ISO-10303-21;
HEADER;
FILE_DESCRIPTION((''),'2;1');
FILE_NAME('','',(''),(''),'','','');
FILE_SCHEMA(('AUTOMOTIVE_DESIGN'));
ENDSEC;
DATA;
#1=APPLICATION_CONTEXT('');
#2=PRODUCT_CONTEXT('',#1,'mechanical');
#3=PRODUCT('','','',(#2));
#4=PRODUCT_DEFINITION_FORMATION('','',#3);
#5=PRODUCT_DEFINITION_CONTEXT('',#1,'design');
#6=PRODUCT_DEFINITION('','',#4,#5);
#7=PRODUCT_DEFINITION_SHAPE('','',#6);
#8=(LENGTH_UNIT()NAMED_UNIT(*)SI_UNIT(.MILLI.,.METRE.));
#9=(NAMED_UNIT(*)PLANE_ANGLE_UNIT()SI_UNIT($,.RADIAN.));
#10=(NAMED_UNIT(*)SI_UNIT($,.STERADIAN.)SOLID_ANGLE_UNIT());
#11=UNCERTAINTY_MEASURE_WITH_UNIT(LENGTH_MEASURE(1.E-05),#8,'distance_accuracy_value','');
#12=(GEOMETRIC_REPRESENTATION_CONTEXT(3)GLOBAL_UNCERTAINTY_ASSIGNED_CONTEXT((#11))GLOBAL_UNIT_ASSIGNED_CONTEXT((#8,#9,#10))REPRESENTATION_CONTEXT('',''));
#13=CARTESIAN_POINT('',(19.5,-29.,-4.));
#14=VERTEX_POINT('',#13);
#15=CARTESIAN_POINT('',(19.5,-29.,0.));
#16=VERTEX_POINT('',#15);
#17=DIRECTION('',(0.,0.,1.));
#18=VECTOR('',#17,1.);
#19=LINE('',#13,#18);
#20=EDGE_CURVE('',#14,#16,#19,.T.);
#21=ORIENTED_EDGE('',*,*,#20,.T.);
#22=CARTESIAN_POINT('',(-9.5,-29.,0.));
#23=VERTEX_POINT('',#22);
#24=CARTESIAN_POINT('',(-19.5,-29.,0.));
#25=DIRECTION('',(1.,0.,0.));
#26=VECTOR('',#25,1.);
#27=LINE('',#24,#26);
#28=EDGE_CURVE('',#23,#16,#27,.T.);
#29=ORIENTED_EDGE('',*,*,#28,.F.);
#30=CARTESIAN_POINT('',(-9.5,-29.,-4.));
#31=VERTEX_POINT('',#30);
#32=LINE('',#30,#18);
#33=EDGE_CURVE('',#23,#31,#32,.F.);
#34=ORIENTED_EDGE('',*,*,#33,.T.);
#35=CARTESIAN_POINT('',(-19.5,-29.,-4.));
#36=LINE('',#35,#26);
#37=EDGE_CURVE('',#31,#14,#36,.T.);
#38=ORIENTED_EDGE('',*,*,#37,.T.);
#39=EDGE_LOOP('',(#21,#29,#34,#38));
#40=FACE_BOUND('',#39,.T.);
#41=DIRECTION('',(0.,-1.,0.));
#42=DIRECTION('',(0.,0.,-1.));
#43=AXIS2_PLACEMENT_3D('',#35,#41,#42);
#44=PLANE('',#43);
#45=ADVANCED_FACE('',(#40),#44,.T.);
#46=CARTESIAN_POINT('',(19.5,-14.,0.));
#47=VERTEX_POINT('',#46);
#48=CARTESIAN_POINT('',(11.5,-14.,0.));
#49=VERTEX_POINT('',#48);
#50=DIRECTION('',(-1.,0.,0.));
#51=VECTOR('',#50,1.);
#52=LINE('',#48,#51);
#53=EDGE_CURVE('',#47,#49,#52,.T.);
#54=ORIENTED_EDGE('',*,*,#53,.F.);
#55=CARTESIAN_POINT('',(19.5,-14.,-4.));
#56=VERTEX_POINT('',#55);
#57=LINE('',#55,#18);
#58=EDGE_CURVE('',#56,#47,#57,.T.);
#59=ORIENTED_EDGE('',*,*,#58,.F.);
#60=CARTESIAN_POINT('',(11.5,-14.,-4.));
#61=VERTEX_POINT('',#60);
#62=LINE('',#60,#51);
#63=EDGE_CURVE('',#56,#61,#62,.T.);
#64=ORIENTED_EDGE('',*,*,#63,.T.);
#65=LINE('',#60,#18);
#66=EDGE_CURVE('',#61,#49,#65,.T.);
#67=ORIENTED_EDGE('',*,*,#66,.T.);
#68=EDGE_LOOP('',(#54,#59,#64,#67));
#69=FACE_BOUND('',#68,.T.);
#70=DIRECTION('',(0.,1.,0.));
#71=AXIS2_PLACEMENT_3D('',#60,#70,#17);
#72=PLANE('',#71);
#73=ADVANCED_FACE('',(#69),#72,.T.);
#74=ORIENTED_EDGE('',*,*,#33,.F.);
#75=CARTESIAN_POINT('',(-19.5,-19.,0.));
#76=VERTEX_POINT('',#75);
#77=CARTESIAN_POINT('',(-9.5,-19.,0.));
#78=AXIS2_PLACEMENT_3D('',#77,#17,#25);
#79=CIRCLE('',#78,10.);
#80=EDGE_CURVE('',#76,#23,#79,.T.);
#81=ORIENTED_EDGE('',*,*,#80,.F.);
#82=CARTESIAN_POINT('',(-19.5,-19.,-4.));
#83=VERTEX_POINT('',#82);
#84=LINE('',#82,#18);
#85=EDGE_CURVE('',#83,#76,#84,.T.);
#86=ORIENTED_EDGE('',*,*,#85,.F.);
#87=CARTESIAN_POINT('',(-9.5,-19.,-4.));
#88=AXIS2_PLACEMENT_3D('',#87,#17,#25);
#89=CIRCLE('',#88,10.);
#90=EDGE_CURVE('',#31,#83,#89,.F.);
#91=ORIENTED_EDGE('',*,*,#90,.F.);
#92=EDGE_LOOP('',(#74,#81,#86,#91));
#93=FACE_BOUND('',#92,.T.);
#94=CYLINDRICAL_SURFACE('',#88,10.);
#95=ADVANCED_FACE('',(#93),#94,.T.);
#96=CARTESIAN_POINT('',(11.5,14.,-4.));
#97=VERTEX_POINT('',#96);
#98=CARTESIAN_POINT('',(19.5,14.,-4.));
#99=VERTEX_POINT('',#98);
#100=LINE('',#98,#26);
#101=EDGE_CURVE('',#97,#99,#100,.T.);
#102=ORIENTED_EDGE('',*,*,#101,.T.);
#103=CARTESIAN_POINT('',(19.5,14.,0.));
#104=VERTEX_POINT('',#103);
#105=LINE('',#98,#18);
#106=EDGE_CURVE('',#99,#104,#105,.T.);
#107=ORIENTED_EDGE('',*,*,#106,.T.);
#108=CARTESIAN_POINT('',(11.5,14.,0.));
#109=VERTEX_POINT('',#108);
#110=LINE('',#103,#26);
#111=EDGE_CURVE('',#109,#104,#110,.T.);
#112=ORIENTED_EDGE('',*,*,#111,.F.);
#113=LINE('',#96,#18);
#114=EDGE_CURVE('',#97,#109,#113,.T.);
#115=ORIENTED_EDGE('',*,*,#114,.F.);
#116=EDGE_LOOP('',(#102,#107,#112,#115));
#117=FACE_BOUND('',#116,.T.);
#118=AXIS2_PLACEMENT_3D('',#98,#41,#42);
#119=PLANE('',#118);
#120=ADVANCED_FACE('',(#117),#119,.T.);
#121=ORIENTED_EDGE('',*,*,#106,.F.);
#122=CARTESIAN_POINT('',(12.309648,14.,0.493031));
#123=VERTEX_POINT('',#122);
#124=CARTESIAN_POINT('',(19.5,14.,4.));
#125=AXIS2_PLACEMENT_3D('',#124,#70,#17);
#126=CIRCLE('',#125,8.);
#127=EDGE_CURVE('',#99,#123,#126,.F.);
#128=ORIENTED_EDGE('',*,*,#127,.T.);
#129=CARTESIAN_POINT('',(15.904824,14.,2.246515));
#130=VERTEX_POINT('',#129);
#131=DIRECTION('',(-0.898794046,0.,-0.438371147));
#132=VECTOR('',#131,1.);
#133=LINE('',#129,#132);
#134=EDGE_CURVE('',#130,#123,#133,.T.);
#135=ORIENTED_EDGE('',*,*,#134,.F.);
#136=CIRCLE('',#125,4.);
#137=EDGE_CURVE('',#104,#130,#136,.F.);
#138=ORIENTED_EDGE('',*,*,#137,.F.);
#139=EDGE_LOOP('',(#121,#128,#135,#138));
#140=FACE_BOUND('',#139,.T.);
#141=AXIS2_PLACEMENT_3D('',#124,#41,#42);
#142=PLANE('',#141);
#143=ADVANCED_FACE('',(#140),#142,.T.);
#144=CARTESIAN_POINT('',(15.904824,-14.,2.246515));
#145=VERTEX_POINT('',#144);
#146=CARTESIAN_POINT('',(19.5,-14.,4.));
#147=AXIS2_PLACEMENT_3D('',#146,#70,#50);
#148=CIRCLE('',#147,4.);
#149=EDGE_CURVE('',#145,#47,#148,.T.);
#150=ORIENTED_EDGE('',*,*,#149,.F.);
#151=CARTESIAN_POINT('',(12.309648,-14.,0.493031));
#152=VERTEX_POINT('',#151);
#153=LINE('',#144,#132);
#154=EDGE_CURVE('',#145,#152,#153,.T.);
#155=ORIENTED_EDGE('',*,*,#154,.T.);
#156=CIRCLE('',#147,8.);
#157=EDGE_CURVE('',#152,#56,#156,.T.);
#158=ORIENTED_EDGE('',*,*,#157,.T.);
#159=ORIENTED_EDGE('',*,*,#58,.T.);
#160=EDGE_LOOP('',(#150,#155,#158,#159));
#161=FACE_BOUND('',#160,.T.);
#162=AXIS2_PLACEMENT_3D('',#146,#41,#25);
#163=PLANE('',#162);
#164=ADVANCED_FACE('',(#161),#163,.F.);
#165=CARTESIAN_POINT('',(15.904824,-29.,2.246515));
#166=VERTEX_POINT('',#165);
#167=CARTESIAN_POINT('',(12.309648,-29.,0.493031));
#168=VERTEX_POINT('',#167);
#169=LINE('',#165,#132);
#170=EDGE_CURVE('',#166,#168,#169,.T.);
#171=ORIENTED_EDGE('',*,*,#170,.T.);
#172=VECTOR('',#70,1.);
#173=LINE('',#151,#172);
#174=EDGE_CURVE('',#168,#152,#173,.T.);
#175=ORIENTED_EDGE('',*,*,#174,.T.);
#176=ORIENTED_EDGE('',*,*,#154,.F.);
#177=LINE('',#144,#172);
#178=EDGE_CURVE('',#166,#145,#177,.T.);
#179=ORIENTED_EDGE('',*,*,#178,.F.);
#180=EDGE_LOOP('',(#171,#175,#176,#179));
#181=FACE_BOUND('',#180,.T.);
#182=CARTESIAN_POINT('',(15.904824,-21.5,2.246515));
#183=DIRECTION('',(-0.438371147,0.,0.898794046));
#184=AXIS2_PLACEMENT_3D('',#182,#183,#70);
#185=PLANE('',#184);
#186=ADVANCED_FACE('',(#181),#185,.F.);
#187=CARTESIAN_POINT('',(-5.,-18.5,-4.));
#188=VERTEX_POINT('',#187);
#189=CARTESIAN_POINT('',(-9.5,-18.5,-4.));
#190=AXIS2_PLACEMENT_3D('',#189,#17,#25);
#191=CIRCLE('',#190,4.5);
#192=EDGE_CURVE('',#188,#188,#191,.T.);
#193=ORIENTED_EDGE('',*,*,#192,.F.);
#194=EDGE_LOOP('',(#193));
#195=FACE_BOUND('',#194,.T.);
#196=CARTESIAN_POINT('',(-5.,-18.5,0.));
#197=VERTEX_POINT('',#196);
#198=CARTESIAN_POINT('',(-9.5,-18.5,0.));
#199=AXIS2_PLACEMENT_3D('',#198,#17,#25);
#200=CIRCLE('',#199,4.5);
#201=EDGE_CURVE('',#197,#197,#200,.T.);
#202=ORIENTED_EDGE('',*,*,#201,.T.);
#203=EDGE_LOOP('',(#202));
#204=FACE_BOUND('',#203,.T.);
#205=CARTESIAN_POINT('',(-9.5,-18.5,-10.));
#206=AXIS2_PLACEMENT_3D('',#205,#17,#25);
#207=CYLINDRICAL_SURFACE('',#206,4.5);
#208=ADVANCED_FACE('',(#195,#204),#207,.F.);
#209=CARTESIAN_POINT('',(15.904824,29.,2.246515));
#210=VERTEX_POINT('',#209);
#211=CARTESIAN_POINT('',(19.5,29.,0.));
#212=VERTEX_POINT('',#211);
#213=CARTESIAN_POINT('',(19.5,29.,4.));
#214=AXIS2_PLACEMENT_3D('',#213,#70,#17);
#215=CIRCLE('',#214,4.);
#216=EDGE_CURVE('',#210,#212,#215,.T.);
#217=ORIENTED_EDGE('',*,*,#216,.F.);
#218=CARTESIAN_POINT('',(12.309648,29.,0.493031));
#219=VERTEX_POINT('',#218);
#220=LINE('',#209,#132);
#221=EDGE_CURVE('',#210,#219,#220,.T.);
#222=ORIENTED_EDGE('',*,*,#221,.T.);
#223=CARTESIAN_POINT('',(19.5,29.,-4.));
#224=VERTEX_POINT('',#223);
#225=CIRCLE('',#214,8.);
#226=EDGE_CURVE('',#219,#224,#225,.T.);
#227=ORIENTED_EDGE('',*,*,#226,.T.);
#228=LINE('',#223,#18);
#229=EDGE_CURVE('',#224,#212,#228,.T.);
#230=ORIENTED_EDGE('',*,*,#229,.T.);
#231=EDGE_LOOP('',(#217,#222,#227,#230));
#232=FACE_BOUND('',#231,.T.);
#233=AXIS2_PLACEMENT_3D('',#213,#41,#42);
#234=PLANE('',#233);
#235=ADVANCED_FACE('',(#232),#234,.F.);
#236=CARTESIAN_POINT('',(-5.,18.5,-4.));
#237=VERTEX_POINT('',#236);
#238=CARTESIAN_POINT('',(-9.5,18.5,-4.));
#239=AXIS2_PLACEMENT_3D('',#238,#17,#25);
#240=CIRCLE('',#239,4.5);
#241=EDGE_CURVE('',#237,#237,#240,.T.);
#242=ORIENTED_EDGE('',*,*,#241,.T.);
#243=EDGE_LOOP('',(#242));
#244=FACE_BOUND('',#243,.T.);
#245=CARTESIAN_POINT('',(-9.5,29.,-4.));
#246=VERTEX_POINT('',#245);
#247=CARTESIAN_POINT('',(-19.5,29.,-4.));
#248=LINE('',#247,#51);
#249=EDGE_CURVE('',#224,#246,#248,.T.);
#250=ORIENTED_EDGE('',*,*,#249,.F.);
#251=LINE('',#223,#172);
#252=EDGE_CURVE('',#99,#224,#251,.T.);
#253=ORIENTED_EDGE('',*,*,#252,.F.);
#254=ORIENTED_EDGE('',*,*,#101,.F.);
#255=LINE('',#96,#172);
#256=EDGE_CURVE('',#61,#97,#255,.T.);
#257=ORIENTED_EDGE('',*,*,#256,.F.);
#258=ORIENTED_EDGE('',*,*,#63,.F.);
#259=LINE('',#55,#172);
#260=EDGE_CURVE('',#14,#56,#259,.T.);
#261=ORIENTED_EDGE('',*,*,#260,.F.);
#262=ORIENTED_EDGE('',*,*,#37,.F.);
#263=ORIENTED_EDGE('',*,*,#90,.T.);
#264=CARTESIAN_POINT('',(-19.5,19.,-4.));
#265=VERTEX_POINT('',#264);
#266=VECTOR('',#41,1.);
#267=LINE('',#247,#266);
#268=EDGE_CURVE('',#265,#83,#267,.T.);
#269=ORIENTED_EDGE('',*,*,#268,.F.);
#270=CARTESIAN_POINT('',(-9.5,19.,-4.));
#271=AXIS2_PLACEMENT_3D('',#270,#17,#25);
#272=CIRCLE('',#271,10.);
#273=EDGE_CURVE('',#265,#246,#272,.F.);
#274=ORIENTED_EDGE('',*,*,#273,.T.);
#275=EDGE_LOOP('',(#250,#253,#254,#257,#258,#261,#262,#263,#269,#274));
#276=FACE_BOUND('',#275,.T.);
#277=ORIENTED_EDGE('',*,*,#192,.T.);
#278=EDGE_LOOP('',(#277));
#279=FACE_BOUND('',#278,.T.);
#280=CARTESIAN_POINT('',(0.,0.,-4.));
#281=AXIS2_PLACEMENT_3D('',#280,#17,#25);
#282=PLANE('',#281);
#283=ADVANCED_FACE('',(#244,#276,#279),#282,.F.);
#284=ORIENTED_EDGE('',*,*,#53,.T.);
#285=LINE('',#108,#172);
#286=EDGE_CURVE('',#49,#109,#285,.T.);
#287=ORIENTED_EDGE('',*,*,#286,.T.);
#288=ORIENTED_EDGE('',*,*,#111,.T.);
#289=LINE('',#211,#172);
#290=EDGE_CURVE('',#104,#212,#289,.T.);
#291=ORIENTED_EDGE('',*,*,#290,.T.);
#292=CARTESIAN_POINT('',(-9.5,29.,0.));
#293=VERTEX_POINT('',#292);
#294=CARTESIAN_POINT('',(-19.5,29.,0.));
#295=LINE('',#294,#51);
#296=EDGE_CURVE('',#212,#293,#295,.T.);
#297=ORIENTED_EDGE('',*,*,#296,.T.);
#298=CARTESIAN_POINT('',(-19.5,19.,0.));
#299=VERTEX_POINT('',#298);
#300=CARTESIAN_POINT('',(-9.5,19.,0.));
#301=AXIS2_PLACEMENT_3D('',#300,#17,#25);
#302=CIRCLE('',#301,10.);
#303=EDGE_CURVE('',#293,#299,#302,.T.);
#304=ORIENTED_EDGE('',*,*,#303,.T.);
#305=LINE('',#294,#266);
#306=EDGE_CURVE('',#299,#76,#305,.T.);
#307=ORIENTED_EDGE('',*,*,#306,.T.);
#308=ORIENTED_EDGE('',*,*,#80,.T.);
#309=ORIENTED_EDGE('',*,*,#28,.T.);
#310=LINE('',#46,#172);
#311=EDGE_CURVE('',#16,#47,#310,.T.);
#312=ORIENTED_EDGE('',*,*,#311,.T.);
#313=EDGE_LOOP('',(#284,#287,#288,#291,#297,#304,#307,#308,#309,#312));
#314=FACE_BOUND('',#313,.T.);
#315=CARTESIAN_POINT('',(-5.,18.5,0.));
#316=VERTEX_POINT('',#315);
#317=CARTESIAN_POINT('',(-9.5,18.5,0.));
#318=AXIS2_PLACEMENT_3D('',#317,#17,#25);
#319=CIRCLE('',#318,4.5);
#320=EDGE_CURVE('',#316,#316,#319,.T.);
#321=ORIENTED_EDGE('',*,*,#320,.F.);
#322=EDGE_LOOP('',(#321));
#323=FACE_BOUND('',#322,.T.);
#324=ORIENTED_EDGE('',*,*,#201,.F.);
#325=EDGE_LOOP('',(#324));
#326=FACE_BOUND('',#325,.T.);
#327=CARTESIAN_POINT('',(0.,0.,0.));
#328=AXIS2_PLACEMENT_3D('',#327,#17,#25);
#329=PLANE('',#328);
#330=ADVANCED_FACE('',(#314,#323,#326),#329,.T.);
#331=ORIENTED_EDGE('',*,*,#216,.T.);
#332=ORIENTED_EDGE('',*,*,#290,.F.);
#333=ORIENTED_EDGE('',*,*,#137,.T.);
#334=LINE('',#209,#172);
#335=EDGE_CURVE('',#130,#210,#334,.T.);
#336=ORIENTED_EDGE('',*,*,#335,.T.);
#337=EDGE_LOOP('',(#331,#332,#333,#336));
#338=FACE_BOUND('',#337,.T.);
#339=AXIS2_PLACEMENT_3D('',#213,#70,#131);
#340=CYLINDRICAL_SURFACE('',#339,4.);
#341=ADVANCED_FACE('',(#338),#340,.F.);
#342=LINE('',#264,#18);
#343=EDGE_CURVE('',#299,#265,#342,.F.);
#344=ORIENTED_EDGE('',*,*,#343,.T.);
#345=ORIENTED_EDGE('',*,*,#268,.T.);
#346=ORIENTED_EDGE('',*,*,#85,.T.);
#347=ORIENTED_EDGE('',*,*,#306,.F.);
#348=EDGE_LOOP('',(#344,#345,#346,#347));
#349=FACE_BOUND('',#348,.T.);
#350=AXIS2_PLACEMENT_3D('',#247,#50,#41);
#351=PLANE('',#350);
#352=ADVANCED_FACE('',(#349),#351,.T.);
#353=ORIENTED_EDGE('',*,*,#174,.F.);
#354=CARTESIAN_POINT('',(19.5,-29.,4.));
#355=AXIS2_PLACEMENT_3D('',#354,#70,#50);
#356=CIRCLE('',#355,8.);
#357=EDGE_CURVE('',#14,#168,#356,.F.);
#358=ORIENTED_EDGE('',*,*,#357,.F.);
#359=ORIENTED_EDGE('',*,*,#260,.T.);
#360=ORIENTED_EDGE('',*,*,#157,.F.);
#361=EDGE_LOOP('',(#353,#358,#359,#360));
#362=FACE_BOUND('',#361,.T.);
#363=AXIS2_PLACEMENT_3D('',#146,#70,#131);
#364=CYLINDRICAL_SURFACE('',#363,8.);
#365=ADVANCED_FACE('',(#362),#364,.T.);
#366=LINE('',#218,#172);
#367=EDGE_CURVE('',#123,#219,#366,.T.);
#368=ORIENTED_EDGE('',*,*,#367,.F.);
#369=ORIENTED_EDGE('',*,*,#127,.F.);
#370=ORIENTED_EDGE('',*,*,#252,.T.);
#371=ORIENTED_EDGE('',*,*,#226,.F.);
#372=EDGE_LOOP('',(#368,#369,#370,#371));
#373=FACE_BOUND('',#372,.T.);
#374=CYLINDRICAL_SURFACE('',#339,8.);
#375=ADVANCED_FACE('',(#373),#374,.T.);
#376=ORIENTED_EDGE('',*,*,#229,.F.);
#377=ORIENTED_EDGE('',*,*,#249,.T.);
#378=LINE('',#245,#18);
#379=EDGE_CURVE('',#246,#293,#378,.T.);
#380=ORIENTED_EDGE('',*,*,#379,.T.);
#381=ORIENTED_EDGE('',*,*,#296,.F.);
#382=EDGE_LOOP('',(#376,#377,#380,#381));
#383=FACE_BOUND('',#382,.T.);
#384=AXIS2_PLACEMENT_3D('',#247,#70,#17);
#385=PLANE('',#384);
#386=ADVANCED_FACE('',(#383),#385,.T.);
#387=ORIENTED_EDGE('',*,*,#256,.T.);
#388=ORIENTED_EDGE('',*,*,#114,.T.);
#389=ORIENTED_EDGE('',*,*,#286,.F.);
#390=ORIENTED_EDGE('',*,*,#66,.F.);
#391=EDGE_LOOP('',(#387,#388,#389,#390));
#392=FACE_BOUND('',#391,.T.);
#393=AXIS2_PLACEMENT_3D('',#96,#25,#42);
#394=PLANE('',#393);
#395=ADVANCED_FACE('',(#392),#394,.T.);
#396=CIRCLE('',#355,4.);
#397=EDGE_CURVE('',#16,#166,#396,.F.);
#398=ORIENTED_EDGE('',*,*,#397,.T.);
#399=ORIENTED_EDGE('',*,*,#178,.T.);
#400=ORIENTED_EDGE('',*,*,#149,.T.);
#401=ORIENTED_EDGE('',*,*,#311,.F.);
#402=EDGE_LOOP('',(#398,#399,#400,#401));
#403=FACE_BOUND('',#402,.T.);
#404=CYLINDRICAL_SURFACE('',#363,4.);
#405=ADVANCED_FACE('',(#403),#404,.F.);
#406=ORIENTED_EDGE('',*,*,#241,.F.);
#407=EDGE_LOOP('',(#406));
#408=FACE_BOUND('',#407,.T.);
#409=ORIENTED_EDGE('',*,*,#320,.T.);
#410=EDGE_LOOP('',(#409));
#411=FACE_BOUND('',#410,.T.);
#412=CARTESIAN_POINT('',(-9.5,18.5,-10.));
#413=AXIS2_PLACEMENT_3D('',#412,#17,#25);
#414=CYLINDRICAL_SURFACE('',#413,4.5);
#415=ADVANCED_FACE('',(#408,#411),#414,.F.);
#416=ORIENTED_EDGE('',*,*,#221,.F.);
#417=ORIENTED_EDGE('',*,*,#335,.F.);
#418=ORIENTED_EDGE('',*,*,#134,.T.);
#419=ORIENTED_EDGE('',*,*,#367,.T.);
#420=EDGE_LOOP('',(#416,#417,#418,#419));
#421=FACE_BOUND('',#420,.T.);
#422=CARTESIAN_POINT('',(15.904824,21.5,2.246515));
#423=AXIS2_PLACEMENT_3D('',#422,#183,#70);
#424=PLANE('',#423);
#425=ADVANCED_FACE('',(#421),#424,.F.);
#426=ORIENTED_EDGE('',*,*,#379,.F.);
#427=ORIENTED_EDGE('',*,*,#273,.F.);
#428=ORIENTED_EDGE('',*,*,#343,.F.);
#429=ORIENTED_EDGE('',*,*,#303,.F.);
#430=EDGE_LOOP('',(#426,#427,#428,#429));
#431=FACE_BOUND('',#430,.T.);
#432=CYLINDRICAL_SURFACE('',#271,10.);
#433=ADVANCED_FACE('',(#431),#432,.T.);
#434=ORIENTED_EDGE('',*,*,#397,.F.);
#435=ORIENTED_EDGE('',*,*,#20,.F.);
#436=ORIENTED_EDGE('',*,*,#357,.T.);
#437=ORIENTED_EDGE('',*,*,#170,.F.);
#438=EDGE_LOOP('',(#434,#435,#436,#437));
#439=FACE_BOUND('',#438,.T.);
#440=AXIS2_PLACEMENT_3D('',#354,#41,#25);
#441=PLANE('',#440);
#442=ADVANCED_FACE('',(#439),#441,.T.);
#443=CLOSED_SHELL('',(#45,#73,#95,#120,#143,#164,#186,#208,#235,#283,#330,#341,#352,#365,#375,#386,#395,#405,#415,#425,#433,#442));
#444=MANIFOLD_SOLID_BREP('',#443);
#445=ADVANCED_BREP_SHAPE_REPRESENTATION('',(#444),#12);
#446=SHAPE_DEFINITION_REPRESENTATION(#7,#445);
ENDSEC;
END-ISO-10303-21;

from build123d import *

# Parameters (mm, degrees)
BASE_FLANGE1_DEPTH = 4
HEM2_START         = -29
HEM2_DEPTH         = 15
HEM2_START_2       = 14
HEM2_2_DEPTH       = 15
SKETCH16_R         = 4.5
CUT_EXTRUDE1_DEPTH = 10
FILLET1_R          = 10


# Read off the part's stored shape, not the designer's step: Hem2
# Sheet-metal steps are written as plain solids
with BuildPart() as part:
    # Sketch1 → Base-Flange1 (new body)
    with BuildSketch(Plane.XY):
        Polygon((-19.5, 29), (19.5, 29), (19.5, 14), (11.5, 14), (11.5, -14), (19.5, -14), (19.5, -29), (-19.5, -29), align=None)
    extrude(amount=-BASE_FLANGE1_DEPTH)

    # Hem2 outline → Hem2 (add)
    with BuildSketch(Plane(origin=(0, 0, 0), x_dir=(1, 0, 0), z_dir=(0, 1, 0)).offset(HEM2_START)):
        with BuildLine():
            Line((15.904823815, -2.246515413), (12.30964763, -0.493030826))
            ThreePointArc((12.30964763, -0.493030826), (23.739354115, -10.784384769), (19.5, 4))
            Line((19.5, 4), (19.5, 0))
            ThreePointArc((19.5, 0), (21.619677058, -7.392192385), (15.904823815, -2.246515413))
        make_face()
    extrude(amount=HEM2_DEPTH)

    # Hem2 2 outline → Hem2 2 (add)
    with BuildSketch(Plane(origin=(0, 0, 0), x_dir=(1, 0, 0), z_dir=(0, 1, 0)).offset(HEM2_START_2)):
        with BuildLine():
            Line((15.904823815, -2.246515413), (12.30964763, -0.493030826))
            ThreePointArc((12.30964763, -0.493030826), (23.739354115, -10.784384769), (19.5, 4))
            Line((19.5, 4), (19.5, 0))
            ThreePointArc((19.5, 0), (21.619677058, -7.392192385), (15.904823815, -2.246515413))
        make_face()
    extrude(amount=HEM2_2_DEPTH)

    # Sketch16 → Cut-Extrude1 (cut)
    with BuildSketch(Plane.XY):
        with Locations((-9.5, 18.5)):
            Circle(SKETCH16_R)
        with Locations((-9.5, -18.5)):
            Circle(SKETCH16_R)
    extrude(amount=-CUT_EXTRUDE1_DEPTH, mode=Mode.SUBTRACT)

    # Fillet1
    fillet1_edges = [part.edges().sort_by_distance(p)[0] for p in [
        (-19.5, -29, -2),
        (-19.5, 29, -2),
    ]]
    fillet(fillet1_edges, radius=FILLET1_R)


solid = part.part
